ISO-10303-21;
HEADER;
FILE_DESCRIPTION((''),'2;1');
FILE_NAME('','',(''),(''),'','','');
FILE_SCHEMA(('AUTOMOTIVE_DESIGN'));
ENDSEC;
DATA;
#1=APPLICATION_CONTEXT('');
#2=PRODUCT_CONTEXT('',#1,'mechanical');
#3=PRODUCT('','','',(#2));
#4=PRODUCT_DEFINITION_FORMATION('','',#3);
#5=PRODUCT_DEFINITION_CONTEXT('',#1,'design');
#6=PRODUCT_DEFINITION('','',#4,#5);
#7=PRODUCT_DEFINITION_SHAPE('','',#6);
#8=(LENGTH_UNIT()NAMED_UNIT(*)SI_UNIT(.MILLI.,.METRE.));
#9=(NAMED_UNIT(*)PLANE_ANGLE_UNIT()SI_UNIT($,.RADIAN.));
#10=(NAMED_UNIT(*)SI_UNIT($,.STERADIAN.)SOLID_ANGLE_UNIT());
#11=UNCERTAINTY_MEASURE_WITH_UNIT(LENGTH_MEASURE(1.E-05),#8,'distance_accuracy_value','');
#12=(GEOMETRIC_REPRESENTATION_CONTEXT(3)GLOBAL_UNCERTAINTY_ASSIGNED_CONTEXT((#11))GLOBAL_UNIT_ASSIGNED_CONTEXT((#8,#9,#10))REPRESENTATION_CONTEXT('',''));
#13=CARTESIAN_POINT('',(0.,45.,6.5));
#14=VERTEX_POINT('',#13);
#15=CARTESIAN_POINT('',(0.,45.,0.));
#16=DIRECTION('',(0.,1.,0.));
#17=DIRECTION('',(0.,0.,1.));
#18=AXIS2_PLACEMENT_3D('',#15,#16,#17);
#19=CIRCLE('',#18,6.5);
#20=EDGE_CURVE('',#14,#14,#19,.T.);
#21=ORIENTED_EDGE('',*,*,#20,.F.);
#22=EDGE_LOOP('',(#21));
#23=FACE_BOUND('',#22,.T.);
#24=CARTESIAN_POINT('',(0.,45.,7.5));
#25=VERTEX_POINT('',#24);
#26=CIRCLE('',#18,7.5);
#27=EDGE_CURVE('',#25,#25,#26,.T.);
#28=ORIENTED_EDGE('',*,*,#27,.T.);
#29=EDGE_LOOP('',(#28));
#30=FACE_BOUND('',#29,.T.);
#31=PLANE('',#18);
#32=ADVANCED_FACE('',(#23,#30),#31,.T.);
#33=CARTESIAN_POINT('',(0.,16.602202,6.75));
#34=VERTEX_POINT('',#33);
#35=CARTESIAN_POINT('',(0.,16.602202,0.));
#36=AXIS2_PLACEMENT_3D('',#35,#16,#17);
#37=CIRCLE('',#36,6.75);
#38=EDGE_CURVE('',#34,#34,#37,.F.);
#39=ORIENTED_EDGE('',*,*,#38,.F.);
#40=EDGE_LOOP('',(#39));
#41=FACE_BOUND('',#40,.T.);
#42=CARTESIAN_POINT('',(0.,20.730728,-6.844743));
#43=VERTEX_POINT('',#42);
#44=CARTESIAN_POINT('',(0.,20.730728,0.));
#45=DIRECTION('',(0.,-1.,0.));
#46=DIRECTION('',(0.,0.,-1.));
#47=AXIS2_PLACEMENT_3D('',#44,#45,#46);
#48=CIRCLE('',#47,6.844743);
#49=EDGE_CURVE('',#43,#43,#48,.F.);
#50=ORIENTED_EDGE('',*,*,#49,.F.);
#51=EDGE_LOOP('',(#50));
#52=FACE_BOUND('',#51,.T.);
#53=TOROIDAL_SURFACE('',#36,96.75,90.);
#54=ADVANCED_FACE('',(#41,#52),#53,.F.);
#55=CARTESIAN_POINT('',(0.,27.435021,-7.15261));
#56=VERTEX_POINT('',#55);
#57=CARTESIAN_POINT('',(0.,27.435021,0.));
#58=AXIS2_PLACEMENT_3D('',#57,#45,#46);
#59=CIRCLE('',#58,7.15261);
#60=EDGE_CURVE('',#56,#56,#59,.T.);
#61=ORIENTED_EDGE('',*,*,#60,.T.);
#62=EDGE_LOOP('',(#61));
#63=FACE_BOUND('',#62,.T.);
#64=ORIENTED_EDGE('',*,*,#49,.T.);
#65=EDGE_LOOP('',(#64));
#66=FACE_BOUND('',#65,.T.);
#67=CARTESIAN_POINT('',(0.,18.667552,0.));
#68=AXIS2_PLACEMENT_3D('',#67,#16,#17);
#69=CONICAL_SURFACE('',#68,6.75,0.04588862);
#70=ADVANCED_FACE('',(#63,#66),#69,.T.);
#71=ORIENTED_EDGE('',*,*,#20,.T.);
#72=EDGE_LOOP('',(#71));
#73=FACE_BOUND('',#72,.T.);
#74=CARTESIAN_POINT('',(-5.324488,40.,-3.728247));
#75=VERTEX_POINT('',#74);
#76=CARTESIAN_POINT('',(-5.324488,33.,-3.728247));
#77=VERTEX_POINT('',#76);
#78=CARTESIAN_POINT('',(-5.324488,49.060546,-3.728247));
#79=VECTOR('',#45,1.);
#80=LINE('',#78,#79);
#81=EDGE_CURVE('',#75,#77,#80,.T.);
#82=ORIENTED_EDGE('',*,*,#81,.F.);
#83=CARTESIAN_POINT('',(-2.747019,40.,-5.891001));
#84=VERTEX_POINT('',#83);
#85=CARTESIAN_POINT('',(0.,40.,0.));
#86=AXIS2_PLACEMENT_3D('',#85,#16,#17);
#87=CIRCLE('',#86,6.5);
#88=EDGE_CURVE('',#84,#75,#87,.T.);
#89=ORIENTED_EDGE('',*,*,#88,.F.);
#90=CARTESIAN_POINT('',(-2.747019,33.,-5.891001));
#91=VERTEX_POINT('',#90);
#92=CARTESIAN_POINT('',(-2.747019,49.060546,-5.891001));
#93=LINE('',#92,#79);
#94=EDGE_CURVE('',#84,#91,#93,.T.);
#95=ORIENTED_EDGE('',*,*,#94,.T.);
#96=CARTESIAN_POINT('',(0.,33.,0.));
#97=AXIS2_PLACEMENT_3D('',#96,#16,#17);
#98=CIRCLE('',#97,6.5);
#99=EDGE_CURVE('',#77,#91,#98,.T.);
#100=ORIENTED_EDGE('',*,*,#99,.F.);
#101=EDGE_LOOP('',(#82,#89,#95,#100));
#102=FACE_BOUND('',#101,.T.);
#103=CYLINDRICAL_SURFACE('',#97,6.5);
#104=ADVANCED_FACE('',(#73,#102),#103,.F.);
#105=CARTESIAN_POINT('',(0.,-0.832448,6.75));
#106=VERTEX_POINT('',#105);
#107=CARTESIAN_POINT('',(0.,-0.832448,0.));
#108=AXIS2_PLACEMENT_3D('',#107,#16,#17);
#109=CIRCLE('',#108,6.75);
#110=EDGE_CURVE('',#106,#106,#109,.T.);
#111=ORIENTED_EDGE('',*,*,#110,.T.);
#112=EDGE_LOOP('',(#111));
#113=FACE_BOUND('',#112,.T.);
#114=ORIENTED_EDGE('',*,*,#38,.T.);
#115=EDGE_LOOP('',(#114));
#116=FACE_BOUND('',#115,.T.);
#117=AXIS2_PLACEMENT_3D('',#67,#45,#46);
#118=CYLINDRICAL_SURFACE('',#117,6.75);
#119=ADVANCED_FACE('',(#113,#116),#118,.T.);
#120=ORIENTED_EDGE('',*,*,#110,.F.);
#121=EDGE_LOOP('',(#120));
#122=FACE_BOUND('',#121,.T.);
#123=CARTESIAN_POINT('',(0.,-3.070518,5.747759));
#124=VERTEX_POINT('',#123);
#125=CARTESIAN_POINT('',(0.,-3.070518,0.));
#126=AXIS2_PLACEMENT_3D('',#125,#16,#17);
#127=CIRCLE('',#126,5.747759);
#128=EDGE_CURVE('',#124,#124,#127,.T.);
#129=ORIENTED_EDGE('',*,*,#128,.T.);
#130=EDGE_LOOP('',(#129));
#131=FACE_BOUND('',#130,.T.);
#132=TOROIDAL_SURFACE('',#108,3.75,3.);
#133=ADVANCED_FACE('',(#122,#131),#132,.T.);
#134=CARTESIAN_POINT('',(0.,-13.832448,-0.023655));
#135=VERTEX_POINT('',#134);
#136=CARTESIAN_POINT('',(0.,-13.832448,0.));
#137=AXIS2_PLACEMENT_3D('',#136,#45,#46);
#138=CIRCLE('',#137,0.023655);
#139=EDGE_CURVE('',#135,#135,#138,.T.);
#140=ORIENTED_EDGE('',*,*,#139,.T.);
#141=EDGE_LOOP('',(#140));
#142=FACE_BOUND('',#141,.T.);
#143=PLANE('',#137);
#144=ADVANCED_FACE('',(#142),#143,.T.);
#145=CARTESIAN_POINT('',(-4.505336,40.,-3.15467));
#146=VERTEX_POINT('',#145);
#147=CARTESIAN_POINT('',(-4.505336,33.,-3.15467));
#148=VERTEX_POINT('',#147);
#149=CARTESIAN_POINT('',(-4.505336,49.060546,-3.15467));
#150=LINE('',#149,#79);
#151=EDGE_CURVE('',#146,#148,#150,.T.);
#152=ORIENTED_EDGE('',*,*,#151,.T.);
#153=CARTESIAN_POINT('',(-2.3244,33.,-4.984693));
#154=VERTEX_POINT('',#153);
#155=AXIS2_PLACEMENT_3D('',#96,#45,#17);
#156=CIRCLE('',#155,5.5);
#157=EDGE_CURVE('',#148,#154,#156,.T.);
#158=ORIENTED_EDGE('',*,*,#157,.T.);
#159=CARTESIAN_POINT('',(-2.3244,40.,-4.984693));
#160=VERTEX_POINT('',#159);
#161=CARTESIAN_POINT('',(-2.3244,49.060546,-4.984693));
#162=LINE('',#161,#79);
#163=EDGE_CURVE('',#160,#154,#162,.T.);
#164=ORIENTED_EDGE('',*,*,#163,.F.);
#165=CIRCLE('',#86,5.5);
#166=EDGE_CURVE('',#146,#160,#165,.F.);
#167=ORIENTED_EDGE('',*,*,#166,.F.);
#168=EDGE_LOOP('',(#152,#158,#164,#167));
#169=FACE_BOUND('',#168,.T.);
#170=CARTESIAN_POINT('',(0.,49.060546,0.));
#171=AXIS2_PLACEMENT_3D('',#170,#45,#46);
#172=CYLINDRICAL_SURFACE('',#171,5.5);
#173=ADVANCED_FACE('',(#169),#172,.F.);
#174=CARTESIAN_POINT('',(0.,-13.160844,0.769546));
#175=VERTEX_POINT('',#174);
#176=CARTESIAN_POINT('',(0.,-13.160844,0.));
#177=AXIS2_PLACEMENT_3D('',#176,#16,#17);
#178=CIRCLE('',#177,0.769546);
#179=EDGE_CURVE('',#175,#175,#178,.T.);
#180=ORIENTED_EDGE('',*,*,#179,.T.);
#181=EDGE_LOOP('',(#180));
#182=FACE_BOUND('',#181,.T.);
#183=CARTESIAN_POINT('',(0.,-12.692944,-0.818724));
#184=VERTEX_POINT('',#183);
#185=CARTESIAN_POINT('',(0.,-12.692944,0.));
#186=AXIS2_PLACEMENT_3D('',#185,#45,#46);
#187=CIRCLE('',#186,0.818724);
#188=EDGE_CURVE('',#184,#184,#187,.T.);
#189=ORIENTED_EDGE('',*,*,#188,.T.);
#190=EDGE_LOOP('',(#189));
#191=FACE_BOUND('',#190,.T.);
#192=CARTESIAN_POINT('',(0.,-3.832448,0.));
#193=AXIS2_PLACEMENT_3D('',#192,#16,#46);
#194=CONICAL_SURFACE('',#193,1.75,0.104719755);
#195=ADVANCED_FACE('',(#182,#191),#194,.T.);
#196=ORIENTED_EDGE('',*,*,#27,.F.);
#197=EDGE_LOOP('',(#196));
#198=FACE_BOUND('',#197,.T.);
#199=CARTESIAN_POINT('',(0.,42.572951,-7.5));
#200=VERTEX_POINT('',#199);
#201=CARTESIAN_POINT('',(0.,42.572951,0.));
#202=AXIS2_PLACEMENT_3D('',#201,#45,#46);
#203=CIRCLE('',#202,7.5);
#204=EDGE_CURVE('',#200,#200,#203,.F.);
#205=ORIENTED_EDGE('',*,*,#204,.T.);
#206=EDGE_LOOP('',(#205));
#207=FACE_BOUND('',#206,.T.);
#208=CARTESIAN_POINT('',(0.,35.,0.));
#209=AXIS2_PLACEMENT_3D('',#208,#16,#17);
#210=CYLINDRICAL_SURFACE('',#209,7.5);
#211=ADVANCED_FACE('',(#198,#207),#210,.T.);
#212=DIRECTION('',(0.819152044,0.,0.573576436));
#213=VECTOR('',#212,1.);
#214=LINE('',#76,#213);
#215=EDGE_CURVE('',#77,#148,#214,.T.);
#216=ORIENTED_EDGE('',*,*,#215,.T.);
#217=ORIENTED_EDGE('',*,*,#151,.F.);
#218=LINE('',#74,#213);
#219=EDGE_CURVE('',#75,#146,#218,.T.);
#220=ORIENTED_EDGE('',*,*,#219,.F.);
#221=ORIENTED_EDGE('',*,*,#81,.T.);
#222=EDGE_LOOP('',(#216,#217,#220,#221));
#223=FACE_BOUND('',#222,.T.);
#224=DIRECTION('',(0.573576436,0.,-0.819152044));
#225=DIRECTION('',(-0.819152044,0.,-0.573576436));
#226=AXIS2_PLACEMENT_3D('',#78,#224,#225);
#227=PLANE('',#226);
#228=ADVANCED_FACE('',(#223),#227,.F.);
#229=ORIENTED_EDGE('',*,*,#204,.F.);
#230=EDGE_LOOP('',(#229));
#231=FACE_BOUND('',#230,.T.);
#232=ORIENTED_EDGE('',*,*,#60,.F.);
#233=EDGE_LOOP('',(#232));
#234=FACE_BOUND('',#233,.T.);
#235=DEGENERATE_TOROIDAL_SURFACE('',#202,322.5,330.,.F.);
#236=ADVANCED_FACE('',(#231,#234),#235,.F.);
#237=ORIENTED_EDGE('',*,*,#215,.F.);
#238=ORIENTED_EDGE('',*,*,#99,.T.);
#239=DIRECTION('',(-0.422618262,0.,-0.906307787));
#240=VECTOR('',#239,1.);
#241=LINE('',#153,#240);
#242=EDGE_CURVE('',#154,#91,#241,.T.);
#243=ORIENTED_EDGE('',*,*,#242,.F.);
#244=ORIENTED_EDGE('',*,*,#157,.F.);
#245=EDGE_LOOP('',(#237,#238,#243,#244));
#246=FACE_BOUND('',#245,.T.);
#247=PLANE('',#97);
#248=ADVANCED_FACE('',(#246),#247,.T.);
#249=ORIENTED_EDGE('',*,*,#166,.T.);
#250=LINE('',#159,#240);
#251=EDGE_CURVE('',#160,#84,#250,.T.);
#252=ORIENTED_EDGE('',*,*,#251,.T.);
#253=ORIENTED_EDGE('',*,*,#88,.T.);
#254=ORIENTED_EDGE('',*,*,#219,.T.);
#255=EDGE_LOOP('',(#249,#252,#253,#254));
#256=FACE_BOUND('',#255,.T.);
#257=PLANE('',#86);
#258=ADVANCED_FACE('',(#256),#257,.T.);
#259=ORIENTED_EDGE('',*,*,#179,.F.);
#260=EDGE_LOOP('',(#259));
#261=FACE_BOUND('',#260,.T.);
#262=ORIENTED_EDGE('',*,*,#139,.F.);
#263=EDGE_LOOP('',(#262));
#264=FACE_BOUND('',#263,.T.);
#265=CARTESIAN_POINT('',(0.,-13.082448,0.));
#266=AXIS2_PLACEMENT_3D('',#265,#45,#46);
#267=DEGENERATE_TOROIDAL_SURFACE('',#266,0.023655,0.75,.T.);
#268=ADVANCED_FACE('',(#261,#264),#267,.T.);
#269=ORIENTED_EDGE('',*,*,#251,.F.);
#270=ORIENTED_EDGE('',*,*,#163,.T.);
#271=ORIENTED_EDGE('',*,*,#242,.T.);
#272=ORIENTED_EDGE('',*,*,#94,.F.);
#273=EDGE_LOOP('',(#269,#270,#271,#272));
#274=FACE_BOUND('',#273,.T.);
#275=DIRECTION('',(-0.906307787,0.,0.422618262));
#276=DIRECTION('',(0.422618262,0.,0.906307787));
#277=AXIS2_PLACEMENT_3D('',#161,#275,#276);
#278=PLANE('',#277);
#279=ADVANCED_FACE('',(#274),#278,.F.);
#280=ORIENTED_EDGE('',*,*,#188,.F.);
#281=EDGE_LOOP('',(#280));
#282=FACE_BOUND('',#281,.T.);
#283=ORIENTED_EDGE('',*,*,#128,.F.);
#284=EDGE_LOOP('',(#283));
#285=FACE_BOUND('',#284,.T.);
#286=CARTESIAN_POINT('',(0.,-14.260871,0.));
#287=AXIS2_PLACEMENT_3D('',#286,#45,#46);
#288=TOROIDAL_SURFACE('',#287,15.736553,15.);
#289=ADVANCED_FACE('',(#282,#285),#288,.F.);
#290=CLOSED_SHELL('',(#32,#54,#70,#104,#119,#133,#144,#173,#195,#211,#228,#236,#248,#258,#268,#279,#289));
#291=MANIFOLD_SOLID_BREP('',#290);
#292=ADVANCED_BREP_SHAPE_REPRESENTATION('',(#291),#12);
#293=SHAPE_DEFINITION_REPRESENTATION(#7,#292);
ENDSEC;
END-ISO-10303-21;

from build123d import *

# Parameters (mm, degrees)
SKETCH1_R           = 4.5
BOSS_EXTRUDE1_DEPTH = 15
FILLET1_R           = 2
SCALE1_SCALE        = 1.5
SKETCH5_R           = 7.5
BOSS_EXTRUDE4_DEPTH = 10
FILLET6_R           = 330
SKETCH6_R           = 6.5
CUT_EXTRUDE1_DEPTH  = 12
BOSS_EXTRUDE5_DEPTH = 7
SKETCH8_R           = 1.75
BOSS_EXTRUDE6_DEPTH = 10
BOSS_EXTRUDE6_TAPER = 6
FILLET8_R           = 0.75
FILLET9_R           = 15


with BuildPart() as part:
    # Sketch1 → Boss-Extrude1 (new body)
    with BuildSketch(Plane(origin=(0, 0, 0), x_dir=(1, 0, 0), z_dir=(0, 1, 0))):
        with Locations(Location((0, 0, 0), (0, 0, 270))):
            Circle(SKETCH1_R)
    extrude(amount=BOSS_EXTRUDE1_DEPTH)

    # Fillet1
    fillet1_edges = [part.edges().sort_by_distance(p)[0] for p in [
        (0, 0, -4.5),
    ]]
    fillet(fillet1_edges, radius=FILLET1_R)


with BuildPart() as part_1:
    # Scale1: scaled about (0, 7.664895453, 0)
    add(part.part.scale(SCALE1_SCALE).moved(Location((0, -3.832447726, 0))))


with BuildPart() as body_2:
    # Sketch5 → Boss-Extrude4 (new body)
    with BuildSketch(Plane(origin=(0, 45, 0), x_dir=(1, 0, 0), z_dir=(0, 1, 0))):
        with Locations(Location((0, 0, 0), (0, 0, 270))):
            Circle(SKETCH5_R)
    extrude(amount=-BOSS_EXTRUDE4_DEPTH)


    add(part_1.part)  # loft1 joins it to this body
    # loft from a face of the part (loft1)
    loft([body_2.faces().sort_by_distance((0, 35, 0))[0], body_2.faces().sort_by_distance((0, 18.667552274, 0))[0]])

    # Fillet6
    # the kernel refuses this fillet: 330 mm, written as the material it takes off along each edge
    with BuildSketch(Plane(origin=(0, 35, 0), x_dir=(0, 0, 1), z_dir=(-1, 0, 0))) as fillet6_piece_1:
        with BuildLine():
            CenterArc((7.5 - FILLET6_R, FILLET6_R * 0.0229483370442), FILLET6_R, 357.370775756, 2.629224244)
            Line((7.5, FILLET6_R * 0.0229483370442), (7.5, 0))
            Line((7.5, 0), (7.5 - FILLET6_R * 0.00105269796789, -FILLET6_R * 0.0229241793765))
        make_face()
    revolve(axis=Axis((0, 35, 0), (0, 1, 0)), mode=Mode.SUBTRACT)

    # Fillet7: read off the stored shape, not the designer's step
    # Fillet7 outline → Fillet7 (revolve)
    with BuildSketch(Plane.XY):
        with BuildLine():
            ThreePointArc((6.75, 16.602201939), (6.773688822, 18.667008654), (6.844742817, 20.730728417))
            Line((6.844742817, 20.730728417), (6.75, 20.730728417))
            Line((6.75, 20.730728417), (6.75, 16.602201939))
        make_face()
    revolve(axis=Axis((0, 0, 0), (0, 1, 0)))

    # Sketch6 → Cut-Extrude1 (cut)
    with BuildSketch(Plane(origin=(0, 45, 0), x_dir=(1, 0, 0), z_dir=(0, 1, 0))):
        with Locations(Location((0, 0, 0), (0, 0, 270))):
            Circle(SKETCH6_R)
    extrude(amount=-CUT_EXTRUDE1_DEPTH, mode=Mode.SUBTRACT)

    # Sketch7 → Boss-Extrude5 (add)
    with BuildSketch(Plane(origin=(0, 33, 0), x_dir=(1, 0, 0), z_dir=(0, 1, 0))):
        with BuildLine():
            Line((-5.324488288, 3.728246836), (-4.505336244, 3.1546704))
            ThreePointArc((-4.505336244, 3.1546704), (-3.535331853, 4.213244437), (-2.32440044, 4.984692829))
            Line((-2.32440044, 4.984692829), (-2.747018701, 5.891000616))
            ThreePointArc((-2.747018701, 5.891000616), (-4.178119463, 4.97928888), (-5.324488288, 3.728246836))
        make_face()
    extrude(amount=BOSS_EXTRUDE5_DEPTH)

    # Sketch8 → Boss-Extrude6 (add)
    with BuildSketch(Plane.XZ.offset(3.832447727)):
        Circle(SKETCH8_R)
    extrude(amount=BOSS_EXTRUDE6_DEPTH, taper=BOSS_EXTRUDE6_TAPER)

    # Fillet8
    fillet8_edges = [body_2.edges().sort_by_distance(p)[0] for p in [
        (-0.698957647, -13.832447727, 0),
    ]]
    fillet(fillet8_edges, radius=FILLET8_R)

    # Fillet9
    # the kernel refuses this fillet: 15 mm, written as the material it adds along each edge
    with BuildSketch(Plane(origin=(0, -3.832447727, 0), x_dir=(1, 0, 0), z_dir=(0, 0, -1))) as fillet9_piece_1:
        with BuildLine():
            CenterArc((15.736552733, 10.428423347), FILLET9_R, 186, 42.247086963)
            Line((5.747758789, -0.761929442), (4.748879394, -1.880964721))
            ThreePointArc((4.748879394, -1.880964721), (3.75, -1.5), (1.75, -1.5))
            Line((1.75, -1.5), (0.258217157, -0.156792695))
            Line((0.258217157, -0.156792695), (0, 2.299979445))
            Line((0, 2.299979445), (0, 8.774445006))
            Line((0, 8.774445006), (0.818724302, 8.860496398))
        make_face()
    revolve(axis=Axis((0, -3.832447727, 0), (0, -1, 0)))


solid = body_2.part
